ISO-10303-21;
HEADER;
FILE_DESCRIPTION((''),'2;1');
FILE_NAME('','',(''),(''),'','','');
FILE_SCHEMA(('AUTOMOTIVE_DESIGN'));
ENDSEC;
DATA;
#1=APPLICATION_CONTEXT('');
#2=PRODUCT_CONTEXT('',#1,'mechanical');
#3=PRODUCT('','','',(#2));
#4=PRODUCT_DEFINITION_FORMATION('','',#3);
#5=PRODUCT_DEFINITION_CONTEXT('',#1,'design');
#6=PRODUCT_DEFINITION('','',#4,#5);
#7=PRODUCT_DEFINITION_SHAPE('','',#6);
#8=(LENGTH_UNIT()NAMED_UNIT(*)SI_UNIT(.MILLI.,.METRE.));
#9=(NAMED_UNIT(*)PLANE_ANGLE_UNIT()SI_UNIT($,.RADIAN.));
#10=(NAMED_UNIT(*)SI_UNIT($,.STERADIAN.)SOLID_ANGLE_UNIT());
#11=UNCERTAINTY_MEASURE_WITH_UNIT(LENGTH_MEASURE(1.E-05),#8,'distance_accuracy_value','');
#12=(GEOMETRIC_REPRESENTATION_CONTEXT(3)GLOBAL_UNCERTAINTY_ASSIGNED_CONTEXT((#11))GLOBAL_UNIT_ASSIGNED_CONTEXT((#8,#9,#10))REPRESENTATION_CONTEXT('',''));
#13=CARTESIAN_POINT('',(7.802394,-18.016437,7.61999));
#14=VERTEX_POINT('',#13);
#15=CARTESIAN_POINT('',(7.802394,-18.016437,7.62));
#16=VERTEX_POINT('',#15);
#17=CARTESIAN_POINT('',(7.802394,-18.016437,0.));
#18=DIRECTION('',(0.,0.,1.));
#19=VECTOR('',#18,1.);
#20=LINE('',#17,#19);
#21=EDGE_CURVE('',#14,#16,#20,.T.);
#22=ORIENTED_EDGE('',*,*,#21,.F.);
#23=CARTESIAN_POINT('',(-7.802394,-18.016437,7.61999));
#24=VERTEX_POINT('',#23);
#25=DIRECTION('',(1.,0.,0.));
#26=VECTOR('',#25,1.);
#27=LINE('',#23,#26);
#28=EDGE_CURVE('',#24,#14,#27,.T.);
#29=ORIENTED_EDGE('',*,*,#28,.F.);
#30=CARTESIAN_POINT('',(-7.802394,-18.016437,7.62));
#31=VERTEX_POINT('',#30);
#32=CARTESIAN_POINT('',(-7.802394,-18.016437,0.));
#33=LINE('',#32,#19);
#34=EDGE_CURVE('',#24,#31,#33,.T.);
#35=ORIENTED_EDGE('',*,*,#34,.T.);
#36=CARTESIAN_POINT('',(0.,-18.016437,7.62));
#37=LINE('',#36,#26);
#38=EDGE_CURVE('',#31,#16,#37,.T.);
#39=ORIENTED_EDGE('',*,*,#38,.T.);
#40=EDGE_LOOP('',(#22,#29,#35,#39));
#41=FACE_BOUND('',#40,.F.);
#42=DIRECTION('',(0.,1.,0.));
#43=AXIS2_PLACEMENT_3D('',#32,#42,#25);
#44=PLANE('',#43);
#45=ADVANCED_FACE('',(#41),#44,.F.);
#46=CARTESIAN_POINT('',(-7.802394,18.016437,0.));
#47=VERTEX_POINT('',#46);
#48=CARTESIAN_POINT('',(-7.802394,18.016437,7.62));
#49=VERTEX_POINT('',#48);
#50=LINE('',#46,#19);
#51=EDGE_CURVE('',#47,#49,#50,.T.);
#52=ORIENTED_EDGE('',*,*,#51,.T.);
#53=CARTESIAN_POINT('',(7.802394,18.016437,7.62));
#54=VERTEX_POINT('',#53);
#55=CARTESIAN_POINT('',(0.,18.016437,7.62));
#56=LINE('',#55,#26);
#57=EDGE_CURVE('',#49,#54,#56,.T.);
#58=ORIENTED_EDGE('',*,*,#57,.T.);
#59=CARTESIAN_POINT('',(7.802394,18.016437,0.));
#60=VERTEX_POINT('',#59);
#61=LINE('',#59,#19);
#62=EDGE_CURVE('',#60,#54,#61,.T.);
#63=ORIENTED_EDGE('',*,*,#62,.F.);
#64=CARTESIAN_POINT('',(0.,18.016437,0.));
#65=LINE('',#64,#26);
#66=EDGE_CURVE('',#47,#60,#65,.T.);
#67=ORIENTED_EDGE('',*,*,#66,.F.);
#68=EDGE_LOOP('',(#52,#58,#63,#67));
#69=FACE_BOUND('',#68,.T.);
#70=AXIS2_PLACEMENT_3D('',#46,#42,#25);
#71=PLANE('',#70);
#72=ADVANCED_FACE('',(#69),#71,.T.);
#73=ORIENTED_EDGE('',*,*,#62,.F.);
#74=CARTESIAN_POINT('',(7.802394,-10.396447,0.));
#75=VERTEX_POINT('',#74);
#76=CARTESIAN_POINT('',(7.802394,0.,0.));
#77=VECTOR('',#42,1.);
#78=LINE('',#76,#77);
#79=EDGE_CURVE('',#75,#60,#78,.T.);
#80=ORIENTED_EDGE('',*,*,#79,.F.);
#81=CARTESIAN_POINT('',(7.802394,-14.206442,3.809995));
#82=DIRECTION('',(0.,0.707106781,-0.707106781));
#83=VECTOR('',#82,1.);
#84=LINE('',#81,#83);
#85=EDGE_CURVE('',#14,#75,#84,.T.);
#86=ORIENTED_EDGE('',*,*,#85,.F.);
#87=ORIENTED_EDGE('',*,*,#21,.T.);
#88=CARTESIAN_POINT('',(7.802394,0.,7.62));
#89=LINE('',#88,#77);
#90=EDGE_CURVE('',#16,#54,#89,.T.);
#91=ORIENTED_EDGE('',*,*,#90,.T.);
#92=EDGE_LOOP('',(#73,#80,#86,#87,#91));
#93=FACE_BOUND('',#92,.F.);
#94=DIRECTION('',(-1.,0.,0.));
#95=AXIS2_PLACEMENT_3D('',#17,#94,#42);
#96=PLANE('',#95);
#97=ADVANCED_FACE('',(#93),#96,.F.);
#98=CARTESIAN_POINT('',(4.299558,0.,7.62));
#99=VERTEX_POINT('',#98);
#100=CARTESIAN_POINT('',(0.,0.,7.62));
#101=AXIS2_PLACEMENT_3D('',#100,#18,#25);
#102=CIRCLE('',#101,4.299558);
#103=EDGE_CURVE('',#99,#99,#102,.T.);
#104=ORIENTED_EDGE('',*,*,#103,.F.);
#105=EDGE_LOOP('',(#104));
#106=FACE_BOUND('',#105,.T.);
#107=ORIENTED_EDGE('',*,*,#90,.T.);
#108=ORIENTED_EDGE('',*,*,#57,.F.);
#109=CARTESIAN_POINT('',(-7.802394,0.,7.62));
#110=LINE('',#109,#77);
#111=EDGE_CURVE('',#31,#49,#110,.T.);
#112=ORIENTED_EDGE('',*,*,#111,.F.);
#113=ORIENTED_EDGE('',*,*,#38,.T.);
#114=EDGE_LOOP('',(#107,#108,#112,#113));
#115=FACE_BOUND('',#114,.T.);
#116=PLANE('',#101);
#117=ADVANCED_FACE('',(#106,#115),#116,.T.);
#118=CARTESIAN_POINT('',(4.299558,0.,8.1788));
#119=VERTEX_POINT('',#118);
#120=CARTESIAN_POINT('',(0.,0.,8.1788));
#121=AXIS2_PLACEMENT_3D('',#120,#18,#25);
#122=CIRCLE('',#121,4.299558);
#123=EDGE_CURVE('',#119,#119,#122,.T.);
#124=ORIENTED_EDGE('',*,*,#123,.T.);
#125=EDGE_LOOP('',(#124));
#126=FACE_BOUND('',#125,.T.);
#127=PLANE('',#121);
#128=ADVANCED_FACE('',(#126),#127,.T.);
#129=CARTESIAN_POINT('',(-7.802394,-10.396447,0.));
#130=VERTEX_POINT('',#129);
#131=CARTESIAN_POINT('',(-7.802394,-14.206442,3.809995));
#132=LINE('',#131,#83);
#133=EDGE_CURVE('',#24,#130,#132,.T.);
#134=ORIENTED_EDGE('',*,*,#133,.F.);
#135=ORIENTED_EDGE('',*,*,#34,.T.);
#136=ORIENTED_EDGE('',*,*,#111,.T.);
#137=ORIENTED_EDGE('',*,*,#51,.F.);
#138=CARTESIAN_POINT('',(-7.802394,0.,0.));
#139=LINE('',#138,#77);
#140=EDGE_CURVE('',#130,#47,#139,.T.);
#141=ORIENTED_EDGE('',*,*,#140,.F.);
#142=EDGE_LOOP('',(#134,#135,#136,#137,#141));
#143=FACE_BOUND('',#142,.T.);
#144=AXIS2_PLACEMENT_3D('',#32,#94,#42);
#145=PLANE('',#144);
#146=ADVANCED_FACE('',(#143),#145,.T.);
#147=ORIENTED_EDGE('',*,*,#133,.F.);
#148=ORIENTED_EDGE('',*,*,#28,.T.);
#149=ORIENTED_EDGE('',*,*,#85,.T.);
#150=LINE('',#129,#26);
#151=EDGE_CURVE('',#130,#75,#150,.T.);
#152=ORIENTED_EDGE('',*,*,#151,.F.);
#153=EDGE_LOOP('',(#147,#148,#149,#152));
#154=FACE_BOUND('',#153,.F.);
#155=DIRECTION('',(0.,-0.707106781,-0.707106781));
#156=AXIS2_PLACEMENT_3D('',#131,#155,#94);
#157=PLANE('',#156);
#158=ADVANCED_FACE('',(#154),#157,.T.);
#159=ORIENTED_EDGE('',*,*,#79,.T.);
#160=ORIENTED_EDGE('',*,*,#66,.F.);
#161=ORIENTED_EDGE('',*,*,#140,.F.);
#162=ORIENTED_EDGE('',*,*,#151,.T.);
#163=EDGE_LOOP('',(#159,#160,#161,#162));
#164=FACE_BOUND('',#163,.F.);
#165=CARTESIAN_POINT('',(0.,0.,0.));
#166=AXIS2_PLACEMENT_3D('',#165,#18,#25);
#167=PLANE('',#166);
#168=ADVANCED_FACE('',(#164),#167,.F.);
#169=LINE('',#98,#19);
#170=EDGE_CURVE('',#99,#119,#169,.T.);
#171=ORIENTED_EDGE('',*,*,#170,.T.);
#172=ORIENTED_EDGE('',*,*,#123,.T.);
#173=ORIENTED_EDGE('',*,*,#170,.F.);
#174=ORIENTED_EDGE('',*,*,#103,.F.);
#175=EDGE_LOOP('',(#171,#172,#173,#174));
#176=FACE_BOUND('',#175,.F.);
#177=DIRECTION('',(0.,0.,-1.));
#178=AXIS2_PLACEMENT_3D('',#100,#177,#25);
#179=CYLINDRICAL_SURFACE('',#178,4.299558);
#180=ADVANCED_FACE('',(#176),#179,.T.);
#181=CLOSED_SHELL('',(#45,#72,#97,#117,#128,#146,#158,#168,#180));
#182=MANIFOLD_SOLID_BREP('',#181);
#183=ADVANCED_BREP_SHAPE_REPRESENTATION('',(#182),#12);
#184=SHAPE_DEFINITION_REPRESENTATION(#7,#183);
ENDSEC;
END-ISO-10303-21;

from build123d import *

# Parameters (mm, degrees)
F0_W     = 15.6047875062
F0_H     = 36.0328741372
F1_DEPTH = 7.62
F2_SIZE  = 7.61999
F3_R     = 4.2995581312
F4_DEPTH = 0.5588


# Not quite as in the source:
# - a fillet or chamfer is up to 0.001 mm smaller than in the source, because OpenCascade refuses the exact size


with BuildPart() as f1:
    # F0 (on Top) → F1 (new body)
    with BuildSketch(Plane.XY):
        Rectangle(F0_W, F0_H)
    extrude(amount=F1_DEPTH)

    # F2 (size 7.62 in the source; OpenCascade refuses exactly that, so slightly less here)
    f2_edges = [f1.edges().sort_by_distance(p)[0] for p in [
        (0, -18.016437, 0),
    ]]
    chamfer(f2_edges, length=F2_SIZE)

    # F3 (on face) → F4 (join)
    with BuildSketch(Plane.XY.offset(7.62)):
        Circle(F3_R)
    extrude(amount=F4_DEPTH)


solid = f1.part
